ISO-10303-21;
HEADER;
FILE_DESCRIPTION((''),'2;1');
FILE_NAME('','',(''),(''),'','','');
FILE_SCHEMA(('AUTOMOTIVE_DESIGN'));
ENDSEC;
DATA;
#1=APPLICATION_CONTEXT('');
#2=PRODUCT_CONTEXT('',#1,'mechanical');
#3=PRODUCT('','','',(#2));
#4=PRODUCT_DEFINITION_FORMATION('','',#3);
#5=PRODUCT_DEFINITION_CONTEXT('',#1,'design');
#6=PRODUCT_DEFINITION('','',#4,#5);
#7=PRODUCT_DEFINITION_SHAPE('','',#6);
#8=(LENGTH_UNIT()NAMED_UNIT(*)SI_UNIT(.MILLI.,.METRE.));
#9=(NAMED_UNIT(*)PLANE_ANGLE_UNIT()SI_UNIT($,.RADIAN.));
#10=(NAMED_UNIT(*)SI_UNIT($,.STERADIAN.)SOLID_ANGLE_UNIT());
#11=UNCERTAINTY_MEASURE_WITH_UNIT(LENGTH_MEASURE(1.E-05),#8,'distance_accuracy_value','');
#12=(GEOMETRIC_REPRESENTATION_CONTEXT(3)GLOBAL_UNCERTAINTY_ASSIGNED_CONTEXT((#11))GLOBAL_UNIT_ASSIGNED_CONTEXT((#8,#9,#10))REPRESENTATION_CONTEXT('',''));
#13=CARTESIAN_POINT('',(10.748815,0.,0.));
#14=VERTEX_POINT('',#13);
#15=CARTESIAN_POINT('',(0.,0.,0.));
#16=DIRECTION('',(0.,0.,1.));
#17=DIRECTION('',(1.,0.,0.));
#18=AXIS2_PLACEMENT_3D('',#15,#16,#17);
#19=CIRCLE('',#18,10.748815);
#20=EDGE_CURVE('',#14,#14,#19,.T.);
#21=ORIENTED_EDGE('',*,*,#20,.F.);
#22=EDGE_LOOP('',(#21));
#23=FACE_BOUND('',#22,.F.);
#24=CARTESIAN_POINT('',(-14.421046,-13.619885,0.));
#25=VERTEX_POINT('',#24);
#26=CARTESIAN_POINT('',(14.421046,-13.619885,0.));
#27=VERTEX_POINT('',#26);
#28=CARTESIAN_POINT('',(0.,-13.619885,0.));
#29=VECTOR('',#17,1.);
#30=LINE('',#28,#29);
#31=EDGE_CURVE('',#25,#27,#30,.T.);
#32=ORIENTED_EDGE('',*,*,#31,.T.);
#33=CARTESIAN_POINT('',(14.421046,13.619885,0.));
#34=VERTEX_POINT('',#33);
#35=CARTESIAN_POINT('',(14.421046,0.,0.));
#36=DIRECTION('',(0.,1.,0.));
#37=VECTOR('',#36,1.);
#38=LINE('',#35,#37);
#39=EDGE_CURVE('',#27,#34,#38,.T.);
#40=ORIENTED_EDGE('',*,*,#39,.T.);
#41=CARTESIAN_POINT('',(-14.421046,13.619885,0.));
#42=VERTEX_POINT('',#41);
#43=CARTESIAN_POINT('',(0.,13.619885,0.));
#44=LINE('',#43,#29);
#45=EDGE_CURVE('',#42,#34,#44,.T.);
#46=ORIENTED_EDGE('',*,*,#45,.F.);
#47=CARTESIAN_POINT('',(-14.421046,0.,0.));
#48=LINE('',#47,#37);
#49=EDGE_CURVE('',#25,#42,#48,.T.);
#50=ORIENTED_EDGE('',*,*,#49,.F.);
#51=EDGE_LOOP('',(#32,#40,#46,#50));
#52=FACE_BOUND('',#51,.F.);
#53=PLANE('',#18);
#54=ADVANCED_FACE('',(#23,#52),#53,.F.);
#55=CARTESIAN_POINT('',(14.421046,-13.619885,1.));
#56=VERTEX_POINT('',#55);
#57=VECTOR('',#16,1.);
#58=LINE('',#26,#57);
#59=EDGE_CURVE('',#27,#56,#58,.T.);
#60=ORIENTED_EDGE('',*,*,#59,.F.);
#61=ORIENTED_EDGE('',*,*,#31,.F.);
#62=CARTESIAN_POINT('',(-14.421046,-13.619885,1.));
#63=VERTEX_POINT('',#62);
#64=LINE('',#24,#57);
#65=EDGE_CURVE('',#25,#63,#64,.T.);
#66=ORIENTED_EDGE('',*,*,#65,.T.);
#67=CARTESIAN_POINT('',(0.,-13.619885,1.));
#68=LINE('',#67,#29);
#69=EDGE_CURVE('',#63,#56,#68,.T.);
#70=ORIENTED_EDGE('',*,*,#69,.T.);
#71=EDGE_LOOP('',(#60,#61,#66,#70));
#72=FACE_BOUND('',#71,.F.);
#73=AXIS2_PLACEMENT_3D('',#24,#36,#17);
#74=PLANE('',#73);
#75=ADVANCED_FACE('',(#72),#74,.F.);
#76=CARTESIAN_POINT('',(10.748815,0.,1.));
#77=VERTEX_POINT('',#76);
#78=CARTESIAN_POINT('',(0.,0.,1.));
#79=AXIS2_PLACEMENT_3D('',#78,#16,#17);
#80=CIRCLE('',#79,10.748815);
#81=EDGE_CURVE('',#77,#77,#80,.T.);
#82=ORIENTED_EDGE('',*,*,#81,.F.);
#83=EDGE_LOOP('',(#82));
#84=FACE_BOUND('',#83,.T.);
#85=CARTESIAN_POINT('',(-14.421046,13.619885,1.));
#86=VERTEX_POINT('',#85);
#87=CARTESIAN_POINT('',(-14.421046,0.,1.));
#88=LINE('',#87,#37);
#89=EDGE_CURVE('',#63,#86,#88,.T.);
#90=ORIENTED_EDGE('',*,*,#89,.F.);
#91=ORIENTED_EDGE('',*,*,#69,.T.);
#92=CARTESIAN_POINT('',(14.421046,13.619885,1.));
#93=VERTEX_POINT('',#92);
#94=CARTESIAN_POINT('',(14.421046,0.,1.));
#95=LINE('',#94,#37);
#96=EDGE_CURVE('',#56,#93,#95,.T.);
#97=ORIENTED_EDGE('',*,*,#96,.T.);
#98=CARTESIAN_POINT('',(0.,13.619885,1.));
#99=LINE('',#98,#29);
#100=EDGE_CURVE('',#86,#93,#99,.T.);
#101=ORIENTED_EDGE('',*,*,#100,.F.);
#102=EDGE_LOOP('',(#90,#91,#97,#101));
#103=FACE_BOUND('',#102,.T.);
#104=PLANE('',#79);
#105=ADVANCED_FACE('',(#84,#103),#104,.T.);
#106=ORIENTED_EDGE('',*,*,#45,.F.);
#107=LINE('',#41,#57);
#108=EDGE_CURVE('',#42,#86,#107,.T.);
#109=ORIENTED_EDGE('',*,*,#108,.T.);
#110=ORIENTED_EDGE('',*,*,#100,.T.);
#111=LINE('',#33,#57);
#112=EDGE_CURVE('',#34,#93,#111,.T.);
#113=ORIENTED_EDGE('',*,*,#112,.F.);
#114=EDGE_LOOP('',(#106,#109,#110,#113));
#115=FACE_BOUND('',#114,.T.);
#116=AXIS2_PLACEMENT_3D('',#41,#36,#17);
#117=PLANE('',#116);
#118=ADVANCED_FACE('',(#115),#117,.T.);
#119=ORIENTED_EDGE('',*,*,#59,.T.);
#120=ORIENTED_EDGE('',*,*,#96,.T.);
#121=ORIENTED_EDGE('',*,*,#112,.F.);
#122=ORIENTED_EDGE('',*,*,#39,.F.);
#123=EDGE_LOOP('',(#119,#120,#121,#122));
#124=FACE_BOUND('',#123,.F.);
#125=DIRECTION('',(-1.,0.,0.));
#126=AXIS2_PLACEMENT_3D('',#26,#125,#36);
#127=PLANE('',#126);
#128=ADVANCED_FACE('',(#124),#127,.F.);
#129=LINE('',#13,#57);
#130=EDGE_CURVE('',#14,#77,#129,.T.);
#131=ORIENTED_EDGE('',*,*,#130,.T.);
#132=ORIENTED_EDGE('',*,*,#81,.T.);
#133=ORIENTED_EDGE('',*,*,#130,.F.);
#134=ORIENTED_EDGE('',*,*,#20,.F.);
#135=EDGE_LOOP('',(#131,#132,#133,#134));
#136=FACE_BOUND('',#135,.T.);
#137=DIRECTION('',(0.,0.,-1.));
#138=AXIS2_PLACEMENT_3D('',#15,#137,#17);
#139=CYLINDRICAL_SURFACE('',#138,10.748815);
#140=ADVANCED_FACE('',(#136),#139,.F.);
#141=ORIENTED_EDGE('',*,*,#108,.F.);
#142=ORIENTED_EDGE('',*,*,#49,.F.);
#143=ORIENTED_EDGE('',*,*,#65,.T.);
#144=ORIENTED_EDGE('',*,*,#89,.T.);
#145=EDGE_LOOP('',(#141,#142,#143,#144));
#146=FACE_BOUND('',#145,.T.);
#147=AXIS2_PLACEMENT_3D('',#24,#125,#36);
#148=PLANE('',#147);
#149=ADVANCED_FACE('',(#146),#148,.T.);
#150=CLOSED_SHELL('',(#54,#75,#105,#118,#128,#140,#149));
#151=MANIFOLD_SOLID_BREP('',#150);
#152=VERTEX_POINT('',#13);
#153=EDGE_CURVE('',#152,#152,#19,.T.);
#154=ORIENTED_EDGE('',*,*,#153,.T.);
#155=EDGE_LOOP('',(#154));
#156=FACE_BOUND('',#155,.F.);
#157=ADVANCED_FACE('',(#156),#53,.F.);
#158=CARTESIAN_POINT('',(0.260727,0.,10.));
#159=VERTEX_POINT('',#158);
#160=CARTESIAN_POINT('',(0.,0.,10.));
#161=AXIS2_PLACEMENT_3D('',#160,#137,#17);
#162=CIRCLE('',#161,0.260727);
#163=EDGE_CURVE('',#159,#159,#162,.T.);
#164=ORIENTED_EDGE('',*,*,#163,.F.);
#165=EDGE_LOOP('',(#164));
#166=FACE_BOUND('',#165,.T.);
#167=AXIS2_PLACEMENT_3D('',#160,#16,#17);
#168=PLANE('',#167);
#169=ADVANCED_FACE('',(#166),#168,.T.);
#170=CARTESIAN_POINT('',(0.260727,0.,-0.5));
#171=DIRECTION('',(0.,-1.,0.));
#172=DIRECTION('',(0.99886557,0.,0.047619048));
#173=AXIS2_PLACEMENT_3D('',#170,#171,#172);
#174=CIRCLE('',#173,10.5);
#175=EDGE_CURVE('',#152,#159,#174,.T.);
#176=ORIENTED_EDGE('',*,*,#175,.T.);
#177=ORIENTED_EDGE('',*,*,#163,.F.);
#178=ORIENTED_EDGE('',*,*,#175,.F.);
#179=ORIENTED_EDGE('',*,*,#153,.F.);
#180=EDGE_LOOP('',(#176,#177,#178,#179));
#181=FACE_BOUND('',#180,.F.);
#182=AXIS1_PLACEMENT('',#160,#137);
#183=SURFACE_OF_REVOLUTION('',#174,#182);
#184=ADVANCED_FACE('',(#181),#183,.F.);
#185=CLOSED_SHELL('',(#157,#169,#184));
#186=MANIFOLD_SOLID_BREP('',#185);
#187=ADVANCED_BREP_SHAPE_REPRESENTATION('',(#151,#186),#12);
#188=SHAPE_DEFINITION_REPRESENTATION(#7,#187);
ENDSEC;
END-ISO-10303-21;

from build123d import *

# Parameters (mm, degrees)
F0_R     = 10.7488151117
F1_DEPTH = 10
F1_TAPER = -3
F3_W     = 28.8420915604
F3_H     = 27.2397696972
F3_R     = 10.7488151117
F4_DEPTH = 1


# Not quite as in the source:
# - a fillet or chamfer that OpenCascade refuses, or shapes differently, is made with other operations: its cross-section is extruded or revolved along the edge and cut away or added


with BuildPart() as f1:
    # F0 (on Top) → F1 (new body)
    with BuildSketch(Plane.XY):
        Circle(F0_R)
    extrude(amount=F1_DEPTH, taper=F1_TAPER)

    # F2: fillet of radius 10.5 on 1 edges, made by hand

    # F2_s1 → F2_t2 (revolve, cut)
    with BuildSketch(Plane.XZ):
        with BuildLine():
            ThreePointArc((10.7488151117, 0), (7.5064150031, 7.0993420768), (0.26072663, 10))
            Line((0.26072663, 10), (11.2728929045, 10))
            Line((11.2728929045, 10), (10.7488151117, 0))
        make_face()
    revolve(axis=Axis((0, 0, 10), (0, 0, -1)), mode=Mode.SUBTRACT)


with BuildPart() as f4:
    # F3 (on face) → F4 (new body)
    with BuildSketch(Plane.XY):
        Rectangle(F3_W, F3_H)
        Circle(F3_R, mode=Mode.SUBTRACT)
    extrude(amount=F4_DEPTH)


solid = Compound([f1.part, f4.part])
